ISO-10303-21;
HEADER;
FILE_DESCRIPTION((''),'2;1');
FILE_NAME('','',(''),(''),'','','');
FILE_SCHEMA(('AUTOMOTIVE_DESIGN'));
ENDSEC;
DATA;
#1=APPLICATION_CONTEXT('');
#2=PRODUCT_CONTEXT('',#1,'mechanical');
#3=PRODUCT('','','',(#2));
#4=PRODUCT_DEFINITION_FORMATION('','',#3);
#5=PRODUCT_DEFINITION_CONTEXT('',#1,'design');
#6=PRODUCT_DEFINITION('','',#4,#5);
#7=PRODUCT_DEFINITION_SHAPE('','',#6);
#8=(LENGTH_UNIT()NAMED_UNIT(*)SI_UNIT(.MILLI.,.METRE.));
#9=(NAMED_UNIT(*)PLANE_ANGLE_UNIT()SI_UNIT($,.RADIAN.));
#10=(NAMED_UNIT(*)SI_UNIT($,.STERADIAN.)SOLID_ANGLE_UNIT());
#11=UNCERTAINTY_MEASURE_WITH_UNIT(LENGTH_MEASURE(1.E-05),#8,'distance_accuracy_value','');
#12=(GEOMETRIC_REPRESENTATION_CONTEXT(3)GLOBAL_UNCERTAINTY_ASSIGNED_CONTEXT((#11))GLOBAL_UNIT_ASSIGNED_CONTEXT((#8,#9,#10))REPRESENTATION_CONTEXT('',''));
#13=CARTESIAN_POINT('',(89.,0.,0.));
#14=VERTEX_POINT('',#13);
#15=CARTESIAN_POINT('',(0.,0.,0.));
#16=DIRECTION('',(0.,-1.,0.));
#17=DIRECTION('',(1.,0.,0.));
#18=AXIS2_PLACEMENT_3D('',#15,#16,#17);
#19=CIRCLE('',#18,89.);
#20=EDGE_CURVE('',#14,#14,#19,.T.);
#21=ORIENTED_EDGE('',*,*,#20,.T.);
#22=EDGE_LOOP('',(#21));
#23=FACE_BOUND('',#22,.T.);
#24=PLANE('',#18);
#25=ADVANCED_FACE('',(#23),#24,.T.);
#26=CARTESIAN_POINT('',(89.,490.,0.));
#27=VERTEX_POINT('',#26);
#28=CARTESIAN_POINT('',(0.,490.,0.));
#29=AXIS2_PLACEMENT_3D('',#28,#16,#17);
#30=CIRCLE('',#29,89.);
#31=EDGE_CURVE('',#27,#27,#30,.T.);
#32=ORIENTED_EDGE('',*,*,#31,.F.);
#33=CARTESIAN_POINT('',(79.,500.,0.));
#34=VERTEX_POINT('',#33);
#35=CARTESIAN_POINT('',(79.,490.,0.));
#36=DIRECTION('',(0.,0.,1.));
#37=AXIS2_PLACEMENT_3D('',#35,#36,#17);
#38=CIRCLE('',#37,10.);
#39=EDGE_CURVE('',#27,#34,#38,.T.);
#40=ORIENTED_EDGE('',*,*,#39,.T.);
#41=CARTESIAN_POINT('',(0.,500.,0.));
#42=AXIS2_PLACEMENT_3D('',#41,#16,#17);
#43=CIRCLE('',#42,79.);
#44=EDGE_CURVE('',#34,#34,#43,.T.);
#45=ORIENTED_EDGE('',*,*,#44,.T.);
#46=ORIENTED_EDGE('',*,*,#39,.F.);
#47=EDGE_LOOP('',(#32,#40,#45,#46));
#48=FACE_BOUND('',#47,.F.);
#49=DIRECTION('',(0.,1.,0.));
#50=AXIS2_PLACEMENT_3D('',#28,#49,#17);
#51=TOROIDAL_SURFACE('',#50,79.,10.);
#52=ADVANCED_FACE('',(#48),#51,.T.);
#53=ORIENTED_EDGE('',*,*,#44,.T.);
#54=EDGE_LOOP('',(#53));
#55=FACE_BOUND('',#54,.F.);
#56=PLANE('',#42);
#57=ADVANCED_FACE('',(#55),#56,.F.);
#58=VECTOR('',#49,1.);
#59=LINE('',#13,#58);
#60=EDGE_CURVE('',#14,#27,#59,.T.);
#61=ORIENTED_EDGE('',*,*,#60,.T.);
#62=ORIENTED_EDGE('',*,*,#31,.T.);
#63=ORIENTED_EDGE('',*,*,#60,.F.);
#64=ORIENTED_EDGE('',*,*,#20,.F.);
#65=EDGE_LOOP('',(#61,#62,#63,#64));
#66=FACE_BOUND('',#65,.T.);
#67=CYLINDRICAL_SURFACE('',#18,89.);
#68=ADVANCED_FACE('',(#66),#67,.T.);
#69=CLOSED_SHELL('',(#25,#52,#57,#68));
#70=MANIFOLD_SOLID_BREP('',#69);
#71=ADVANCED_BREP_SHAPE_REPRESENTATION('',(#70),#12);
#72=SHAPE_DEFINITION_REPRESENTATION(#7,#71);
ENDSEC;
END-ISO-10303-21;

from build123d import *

# Parameters (mm, degrees)
F0_R     = 89
F1_DEPTH = 500
F2_R     = 10


# Not quite as in the source:
# - a feature names something its author has since deleted; it is built from what else it names


with BuildPart() as f1:
    # F0 (on Front) → F1 (new body)
    with BuildSketch(Plane.XZ):
        Circle(F0_R)
    extrude(amount=-F1_DEPTH)

    # F2
    f2_edges = [f1.edges().sort_by_distance(p)[0] for p in [
        (-89, 500, 0),
    ]]
    fillet(f2_edges, radius=F2_R)


solid = f1.part
